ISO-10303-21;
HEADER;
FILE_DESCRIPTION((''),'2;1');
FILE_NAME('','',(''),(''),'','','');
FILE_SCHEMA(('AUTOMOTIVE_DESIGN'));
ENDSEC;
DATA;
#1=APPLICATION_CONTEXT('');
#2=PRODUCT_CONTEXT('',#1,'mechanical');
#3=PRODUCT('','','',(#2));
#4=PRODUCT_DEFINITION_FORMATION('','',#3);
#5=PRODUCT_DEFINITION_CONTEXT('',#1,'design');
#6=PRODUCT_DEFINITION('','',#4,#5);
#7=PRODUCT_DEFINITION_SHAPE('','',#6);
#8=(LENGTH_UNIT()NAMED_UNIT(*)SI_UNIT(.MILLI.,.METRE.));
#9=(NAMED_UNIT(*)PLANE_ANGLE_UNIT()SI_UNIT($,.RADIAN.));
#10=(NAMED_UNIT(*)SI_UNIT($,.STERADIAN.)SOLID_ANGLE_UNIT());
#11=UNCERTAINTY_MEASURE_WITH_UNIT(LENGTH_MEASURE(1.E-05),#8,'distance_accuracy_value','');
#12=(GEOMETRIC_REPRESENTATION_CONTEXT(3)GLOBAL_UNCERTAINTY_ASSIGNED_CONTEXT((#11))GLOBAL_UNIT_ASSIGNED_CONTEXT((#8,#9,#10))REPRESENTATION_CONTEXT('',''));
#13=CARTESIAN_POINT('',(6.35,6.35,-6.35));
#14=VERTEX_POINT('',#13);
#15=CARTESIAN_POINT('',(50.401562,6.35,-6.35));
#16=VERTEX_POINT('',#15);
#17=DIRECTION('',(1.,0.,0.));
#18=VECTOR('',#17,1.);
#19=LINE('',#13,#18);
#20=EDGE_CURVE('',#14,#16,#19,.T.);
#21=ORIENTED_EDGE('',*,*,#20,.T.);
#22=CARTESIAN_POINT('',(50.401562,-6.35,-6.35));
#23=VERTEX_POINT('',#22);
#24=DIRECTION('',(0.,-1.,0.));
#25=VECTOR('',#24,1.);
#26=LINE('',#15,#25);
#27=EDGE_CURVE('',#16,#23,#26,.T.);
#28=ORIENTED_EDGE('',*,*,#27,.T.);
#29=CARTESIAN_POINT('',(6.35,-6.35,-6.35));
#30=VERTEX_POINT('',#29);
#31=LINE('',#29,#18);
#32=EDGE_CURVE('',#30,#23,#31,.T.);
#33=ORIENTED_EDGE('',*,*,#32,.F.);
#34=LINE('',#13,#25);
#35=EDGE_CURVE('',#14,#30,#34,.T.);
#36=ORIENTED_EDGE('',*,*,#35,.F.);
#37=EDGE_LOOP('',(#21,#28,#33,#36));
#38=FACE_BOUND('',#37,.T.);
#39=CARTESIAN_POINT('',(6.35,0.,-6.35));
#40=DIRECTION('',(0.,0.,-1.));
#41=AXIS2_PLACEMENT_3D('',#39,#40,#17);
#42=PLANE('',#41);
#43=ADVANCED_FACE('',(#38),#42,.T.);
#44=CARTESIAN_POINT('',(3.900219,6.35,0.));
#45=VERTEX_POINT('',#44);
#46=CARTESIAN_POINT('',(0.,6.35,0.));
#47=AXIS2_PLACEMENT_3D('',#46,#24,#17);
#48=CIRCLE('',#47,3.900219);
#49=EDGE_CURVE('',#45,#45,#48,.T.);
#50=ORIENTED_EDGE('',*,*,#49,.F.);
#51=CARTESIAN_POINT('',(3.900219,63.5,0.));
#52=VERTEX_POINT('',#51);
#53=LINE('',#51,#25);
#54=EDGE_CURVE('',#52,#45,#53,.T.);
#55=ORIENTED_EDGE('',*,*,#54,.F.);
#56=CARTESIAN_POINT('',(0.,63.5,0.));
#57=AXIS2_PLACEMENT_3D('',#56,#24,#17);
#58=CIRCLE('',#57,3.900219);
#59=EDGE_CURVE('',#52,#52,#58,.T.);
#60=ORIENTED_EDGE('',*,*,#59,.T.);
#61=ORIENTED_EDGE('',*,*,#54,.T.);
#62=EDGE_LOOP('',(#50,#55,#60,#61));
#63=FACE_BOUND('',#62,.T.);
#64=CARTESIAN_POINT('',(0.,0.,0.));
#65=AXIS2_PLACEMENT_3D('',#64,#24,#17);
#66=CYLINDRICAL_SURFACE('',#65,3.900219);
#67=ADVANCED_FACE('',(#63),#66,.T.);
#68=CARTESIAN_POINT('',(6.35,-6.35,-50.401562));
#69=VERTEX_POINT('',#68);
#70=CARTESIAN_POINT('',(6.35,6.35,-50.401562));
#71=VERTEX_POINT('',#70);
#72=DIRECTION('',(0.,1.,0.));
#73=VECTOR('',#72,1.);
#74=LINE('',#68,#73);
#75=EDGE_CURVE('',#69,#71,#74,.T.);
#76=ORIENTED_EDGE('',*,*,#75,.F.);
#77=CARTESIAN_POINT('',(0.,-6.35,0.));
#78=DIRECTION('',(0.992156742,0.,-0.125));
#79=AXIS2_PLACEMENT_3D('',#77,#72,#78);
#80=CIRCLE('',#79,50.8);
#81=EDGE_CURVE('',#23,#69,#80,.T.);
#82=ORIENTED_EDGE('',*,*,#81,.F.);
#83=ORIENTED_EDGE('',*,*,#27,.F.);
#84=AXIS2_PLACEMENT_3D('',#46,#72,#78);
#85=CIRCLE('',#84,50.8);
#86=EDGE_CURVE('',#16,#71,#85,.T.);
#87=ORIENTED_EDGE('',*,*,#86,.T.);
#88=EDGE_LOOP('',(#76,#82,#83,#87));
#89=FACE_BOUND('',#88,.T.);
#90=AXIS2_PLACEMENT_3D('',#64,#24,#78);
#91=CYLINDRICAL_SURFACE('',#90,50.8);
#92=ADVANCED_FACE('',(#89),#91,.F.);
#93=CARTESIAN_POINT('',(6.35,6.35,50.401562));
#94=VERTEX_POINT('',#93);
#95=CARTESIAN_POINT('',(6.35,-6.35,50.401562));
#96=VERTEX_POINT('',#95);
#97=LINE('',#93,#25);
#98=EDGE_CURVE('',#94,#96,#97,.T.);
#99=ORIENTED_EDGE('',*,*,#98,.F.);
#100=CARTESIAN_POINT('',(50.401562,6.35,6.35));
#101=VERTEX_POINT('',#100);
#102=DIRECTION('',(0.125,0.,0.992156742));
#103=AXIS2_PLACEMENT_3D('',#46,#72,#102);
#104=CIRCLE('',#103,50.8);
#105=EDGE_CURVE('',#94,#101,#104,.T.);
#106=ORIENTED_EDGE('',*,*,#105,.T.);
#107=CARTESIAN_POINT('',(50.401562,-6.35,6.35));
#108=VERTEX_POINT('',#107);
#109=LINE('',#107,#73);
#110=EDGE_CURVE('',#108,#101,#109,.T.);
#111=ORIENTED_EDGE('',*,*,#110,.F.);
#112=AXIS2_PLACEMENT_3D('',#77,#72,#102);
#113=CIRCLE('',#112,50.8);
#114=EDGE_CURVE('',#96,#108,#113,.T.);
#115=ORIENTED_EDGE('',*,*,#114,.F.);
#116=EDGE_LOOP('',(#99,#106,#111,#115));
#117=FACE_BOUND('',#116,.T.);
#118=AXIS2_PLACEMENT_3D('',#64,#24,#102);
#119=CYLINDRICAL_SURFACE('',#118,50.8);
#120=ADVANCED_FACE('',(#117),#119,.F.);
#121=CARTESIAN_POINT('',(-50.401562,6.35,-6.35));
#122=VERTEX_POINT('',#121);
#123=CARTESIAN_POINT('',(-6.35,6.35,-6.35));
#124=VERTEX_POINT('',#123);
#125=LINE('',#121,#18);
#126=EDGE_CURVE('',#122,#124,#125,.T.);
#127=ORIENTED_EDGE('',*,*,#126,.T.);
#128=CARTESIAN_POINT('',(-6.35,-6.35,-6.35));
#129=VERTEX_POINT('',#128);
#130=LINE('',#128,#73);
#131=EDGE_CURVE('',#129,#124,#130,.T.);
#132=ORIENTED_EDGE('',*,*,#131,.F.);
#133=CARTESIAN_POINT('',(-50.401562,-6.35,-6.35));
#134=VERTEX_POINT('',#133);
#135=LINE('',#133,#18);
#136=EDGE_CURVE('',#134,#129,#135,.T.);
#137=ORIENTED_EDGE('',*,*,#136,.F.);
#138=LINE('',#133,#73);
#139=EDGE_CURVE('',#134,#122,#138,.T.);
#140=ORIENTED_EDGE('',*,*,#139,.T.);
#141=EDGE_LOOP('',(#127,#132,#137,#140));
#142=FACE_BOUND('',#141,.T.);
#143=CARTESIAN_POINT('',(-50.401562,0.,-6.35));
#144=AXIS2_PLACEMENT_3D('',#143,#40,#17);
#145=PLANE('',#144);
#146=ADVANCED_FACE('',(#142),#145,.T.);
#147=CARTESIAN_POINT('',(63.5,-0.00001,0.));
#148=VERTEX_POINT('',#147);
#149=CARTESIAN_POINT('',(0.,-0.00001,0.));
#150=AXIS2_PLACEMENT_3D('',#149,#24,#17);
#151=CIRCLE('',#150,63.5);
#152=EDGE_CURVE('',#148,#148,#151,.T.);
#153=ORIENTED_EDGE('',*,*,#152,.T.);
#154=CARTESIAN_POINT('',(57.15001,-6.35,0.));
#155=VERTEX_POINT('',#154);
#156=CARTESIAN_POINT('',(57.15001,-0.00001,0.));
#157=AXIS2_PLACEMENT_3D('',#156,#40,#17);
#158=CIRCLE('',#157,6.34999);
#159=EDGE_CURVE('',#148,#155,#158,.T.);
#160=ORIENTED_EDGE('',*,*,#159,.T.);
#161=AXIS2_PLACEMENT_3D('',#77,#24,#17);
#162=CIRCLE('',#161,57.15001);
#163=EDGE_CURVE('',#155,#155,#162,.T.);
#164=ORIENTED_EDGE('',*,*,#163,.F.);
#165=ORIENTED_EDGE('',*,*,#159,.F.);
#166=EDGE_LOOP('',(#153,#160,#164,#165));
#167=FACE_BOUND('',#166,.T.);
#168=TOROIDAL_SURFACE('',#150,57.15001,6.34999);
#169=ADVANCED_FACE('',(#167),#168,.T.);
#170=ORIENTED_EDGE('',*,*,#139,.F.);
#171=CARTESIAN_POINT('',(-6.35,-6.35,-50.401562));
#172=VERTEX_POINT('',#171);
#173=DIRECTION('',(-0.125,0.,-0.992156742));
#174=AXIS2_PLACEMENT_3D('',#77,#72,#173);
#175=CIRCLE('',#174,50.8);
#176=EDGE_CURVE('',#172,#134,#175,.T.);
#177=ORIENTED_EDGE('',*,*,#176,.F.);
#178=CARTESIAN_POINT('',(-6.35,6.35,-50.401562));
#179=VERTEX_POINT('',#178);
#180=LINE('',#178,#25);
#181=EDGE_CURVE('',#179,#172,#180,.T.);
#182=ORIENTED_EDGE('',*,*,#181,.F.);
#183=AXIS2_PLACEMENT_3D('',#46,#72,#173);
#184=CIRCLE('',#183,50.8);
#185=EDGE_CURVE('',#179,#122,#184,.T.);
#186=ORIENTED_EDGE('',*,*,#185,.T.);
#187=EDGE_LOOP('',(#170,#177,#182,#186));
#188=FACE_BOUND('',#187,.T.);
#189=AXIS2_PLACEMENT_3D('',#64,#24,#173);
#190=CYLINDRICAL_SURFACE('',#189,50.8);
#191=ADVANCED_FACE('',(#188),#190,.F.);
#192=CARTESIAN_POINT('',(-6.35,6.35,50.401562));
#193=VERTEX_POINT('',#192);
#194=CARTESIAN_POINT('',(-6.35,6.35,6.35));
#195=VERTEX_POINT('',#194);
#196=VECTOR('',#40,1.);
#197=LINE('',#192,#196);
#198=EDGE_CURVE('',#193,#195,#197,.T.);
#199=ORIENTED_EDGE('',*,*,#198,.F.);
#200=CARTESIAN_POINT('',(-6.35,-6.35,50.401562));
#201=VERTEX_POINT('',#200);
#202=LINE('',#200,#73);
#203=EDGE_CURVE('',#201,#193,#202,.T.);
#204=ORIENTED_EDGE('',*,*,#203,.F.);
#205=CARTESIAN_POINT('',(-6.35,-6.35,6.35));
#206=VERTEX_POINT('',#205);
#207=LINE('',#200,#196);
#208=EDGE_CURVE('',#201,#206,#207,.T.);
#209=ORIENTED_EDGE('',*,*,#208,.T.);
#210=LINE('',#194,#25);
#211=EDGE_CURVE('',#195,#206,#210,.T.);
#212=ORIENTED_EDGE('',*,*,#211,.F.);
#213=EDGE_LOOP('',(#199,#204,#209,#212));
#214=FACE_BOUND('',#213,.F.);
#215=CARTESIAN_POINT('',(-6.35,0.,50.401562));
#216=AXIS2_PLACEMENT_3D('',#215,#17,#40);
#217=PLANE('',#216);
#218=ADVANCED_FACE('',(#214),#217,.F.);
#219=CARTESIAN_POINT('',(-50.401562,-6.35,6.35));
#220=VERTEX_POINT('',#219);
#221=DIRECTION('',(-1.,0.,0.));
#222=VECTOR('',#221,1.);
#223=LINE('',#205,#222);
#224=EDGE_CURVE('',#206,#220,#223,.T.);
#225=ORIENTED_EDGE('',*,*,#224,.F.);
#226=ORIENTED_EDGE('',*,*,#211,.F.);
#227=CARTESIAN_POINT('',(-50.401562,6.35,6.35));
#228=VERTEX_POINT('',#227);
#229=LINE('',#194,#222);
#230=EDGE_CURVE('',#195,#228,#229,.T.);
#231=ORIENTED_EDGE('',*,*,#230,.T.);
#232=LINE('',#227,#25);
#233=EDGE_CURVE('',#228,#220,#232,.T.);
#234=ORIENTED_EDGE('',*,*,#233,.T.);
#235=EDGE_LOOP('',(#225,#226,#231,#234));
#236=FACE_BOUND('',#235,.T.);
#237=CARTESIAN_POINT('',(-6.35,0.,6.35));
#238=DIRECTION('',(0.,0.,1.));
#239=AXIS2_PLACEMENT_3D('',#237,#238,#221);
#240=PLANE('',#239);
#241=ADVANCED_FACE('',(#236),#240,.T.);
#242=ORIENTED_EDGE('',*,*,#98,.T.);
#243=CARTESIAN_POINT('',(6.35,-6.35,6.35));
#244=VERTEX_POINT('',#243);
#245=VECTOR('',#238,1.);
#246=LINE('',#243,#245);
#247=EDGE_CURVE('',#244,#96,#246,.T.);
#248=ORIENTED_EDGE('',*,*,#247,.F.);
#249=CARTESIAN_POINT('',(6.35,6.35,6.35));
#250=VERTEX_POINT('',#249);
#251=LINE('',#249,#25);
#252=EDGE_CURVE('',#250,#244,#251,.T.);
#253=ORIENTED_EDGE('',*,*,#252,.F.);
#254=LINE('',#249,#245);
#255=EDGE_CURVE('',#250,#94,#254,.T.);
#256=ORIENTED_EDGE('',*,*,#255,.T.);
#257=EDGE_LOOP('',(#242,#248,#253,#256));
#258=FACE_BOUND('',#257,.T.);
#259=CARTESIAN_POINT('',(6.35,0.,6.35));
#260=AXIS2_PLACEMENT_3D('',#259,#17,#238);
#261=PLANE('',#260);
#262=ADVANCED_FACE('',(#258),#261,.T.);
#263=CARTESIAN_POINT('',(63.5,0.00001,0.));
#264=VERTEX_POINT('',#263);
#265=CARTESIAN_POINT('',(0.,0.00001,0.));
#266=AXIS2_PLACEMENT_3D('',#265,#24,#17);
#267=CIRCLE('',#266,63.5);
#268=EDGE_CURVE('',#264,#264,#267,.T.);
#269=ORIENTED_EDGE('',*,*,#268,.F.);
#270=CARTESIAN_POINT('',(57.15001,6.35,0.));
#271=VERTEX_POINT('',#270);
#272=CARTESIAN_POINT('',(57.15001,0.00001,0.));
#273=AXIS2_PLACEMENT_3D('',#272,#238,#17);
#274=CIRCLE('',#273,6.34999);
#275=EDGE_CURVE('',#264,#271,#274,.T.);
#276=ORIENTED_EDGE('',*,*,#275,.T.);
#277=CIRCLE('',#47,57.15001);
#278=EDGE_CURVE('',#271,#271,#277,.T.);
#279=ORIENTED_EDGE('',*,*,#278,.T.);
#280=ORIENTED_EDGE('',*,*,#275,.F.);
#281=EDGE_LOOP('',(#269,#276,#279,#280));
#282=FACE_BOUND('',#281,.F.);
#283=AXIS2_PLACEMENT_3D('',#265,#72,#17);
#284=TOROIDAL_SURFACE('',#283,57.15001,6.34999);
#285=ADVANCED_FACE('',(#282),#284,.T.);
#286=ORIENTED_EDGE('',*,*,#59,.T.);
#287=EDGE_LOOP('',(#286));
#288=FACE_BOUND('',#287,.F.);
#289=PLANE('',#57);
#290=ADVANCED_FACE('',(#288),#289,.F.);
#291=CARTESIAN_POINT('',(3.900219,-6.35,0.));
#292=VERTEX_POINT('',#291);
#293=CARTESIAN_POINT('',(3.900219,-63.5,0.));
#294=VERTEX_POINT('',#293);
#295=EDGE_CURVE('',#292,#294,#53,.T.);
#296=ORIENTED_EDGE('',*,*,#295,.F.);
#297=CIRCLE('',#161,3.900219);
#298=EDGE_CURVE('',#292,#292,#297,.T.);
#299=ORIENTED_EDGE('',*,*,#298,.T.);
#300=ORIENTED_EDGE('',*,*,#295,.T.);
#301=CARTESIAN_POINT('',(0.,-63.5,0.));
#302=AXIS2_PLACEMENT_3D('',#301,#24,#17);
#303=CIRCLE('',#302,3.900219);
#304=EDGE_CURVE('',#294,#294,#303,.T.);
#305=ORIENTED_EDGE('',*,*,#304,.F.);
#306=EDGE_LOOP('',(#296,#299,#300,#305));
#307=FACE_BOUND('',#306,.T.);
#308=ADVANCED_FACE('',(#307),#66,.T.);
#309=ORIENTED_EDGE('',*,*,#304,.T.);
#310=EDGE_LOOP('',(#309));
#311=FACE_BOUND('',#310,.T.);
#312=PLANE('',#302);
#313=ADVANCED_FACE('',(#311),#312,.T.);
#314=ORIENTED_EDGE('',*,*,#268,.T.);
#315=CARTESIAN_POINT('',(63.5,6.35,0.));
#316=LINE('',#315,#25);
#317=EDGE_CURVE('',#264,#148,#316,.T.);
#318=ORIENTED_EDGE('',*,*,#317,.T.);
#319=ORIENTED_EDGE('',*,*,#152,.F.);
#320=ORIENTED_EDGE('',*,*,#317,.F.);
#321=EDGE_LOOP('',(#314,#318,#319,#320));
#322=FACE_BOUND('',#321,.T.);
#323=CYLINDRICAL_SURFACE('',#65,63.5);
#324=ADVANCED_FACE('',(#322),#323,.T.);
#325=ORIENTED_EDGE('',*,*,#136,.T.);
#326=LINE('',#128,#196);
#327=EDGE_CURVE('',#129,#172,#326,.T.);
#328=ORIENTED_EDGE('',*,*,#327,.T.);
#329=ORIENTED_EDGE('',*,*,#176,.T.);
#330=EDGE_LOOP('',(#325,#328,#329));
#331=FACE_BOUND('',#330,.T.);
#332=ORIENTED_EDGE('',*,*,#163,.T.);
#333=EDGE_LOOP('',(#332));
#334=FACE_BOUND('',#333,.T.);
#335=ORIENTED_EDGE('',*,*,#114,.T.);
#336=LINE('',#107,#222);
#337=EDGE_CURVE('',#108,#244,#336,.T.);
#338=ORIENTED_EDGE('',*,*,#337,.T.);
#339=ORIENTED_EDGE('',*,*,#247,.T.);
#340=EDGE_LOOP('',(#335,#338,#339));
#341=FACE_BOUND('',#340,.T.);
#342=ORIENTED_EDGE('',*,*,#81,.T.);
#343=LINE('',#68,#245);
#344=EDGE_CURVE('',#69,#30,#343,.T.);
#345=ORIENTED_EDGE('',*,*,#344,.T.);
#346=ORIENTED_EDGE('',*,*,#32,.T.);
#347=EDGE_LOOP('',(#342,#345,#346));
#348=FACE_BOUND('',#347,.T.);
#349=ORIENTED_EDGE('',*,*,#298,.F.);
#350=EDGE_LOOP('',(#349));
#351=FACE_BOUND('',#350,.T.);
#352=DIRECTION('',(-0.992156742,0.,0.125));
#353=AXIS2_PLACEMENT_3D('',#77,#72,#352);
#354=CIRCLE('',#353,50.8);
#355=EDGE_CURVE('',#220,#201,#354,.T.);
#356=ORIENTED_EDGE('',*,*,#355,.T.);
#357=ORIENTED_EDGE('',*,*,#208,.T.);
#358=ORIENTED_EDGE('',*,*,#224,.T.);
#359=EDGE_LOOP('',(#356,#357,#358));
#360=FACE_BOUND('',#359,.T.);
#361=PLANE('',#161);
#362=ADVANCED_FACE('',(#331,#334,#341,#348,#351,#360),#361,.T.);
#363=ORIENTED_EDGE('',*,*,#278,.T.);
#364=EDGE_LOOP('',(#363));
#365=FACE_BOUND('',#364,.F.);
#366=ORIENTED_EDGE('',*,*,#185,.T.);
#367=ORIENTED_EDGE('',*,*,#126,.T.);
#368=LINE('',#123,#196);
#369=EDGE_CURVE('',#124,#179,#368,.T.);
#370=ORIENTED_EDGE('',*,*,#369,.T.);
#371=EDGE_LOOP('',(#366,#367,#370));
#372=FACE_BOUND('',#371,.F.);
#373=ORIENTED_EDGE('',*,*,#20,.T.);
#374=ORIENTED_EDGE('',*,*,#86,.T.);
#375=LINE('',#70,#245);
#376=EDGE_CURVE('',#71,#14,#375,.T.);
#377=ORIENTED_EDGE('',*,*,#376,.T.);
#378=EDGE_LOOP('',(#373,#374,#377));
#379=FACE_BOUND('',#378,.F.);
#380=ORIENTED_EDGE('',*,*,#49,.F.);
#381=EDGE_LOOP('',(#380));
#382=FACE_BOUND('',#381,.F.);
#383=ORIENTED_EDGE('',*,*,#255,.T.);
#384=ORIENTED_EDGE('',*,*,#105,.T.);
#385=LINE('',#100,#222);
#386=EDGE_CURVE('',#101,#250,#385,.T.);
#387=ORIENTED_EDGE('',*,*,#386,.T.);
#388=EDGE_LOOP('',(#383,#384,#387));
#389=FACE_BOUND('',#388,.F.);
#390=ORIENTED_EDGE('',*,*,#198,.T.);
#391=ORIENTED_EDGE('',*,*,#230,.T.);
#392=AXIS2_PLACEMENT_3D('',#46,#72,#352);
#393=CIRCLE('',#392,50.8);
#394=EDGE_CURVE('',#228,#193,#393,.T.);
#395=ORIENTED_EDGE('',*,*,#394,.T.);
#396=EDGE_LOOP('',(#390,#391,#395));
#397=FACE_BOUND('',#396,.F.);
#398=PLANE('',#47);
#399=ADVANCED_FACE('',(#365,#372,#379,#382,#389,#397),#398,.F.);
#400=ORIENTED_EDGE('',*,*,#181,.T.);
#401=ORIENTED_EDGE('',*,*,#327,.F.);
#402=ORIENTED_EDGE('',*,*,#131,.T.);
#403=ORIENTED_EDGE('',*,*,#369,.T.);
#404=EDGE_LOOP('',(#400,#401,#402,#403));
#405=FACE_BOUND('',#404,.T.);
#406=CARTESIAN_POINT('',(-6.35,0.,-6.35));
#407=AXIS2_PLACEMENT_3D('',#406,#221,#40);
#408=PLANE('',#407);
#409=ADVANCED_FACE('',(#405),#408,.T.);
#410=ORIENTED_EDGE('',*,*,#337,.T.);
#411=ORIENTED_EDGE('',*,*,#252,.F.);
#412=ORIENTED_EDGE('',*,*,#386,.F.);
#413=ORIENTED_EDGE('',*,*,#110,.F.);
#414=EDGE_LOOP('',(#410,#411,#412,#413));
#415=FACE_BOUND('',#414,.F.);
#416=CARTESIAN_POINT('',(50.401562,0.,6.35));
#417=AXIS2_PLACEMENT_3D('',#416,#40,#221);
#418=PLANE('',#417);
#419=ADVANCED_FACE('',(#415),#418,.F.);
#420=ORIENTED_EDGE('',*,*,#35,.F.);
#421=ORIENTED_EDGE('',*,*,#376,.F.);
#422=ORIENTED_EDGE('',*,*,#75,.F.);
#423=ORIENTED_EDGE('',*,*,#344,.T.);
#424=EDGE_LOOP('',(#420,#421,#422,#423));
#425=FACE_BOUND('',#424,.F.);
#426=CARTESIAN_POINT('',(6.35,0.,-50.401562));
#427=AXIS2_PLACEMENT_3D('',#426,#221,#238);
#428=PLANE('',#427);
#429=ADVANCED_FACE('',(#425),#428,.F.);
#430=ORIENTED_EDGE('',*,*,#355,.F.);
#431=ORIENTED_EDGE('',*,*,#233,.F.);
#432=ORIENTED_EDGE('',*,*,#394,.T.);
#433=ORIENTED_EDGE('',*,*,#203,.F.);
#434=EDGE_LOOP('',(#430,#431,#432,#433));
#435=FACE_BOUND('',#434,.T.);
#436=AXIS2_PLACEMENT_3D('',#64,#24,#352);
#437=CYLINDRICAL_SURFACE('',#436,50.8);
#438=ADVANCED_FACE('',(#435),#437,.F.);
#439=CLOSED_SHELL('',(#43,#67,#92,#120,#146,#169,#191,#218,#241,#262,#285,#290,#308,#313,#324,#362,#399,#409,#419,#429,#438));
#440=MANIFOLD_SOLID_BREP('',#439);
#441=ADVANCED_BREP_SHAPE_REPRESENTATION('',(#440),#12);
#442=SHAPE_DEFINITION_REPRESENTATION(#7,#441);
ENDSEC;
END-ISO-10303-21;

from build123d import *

# Parameters (mm, degrees)
F0_R     = 63.5
F0_R_2   = 3.81
F1_DEPTH = 6.35
F2_R     = 6.34999
F3_R     = 3.9002189419
F4_DEPTH = 63.5


# Not quite as in the source:
# - a fillet or chamfer is up to 0.001 mm smaller than in the source, because OpenCascade refuses the exact size


with BuildPart() as f1:
    # F0 (on Front) → F1 (new body, symmetric)
    with BuildSketch(Plane.XZ):
        Circle(F0_R)
        with BuildLine():
            ThreePointArc((-6.35, -50.4015624758), (-35.9210244843, -35.9210244843), (-50.4015624758, -6.35))
            Line((-50.4015624758, -6.35), (-6.35, -6.35))
            Line((-6.35, -6.35), (-6.35, -50.4015624758))
        make_face(mode=Mode.SUBTRACT)
        with BuildLine():
            Line((6.35, -50.4015624758), (6.35, -6.35))
            Line((6.35, -6.35), (50.4015624758, -6.35))
            ThreePointArc((50.4015624758, -6.35), (35.9210244843, -35.9210244843), (6.35, -50.4015624758))
        make_face(mode=Mode.SUBTRACT)
        with BuildLine():
            Line((-6.3499999233, 50.4015624854), (-6.3499999233, 6.35))
            Line((-6.3499999233, 6.35), (-50.4015624758, 6.35))
            ThreePointArc((-50.4015624758, 6.35), (-35.9210244569, 35.9210245116), (-6.3499999233, 50.4015624854))
        make_face(mode=Mode.SUBTRACT)
        Circle(F0_R_2, mode=Mode.SUBTRACT)
        with BuildLine():
            Line((50.4015624854, 6.3499999233), (6.35, 6.3499999233))
            Line((6.35, 6.3499999233), (6.35, 50.4015624758))
            ThreePointArc((6.35, 50.4015624758), (35.9210245116, 35.9210244569), (50.4015624854, 6.3499999233))
        make_face(mode=Mode.SUBTRACT)
    extrude(amount=F1_DEPTH, both=True)

    # F2 (radius 6.35 in the source; OpenCascade refuses exactly that, so slightly less here)
    f2_edges = [f1.edges().sort_by_distance(p)[0] for p in [
        (-63.5, 6.35, 0),
        (63.5, 0, 0),
        (-63.5, -6.35, 0),
    ]]
    fillet(f2_edges, radius=F2_R)

    # F3 (on Front) → F4 (join, symmetric)
    with BuildSketch(Plane.XZ):
        with Locations((4.138e-07, 0)):
            Circle(F3_R)
    extrude(amount=F4_DEPTH, both=True)


solid = f1.part
